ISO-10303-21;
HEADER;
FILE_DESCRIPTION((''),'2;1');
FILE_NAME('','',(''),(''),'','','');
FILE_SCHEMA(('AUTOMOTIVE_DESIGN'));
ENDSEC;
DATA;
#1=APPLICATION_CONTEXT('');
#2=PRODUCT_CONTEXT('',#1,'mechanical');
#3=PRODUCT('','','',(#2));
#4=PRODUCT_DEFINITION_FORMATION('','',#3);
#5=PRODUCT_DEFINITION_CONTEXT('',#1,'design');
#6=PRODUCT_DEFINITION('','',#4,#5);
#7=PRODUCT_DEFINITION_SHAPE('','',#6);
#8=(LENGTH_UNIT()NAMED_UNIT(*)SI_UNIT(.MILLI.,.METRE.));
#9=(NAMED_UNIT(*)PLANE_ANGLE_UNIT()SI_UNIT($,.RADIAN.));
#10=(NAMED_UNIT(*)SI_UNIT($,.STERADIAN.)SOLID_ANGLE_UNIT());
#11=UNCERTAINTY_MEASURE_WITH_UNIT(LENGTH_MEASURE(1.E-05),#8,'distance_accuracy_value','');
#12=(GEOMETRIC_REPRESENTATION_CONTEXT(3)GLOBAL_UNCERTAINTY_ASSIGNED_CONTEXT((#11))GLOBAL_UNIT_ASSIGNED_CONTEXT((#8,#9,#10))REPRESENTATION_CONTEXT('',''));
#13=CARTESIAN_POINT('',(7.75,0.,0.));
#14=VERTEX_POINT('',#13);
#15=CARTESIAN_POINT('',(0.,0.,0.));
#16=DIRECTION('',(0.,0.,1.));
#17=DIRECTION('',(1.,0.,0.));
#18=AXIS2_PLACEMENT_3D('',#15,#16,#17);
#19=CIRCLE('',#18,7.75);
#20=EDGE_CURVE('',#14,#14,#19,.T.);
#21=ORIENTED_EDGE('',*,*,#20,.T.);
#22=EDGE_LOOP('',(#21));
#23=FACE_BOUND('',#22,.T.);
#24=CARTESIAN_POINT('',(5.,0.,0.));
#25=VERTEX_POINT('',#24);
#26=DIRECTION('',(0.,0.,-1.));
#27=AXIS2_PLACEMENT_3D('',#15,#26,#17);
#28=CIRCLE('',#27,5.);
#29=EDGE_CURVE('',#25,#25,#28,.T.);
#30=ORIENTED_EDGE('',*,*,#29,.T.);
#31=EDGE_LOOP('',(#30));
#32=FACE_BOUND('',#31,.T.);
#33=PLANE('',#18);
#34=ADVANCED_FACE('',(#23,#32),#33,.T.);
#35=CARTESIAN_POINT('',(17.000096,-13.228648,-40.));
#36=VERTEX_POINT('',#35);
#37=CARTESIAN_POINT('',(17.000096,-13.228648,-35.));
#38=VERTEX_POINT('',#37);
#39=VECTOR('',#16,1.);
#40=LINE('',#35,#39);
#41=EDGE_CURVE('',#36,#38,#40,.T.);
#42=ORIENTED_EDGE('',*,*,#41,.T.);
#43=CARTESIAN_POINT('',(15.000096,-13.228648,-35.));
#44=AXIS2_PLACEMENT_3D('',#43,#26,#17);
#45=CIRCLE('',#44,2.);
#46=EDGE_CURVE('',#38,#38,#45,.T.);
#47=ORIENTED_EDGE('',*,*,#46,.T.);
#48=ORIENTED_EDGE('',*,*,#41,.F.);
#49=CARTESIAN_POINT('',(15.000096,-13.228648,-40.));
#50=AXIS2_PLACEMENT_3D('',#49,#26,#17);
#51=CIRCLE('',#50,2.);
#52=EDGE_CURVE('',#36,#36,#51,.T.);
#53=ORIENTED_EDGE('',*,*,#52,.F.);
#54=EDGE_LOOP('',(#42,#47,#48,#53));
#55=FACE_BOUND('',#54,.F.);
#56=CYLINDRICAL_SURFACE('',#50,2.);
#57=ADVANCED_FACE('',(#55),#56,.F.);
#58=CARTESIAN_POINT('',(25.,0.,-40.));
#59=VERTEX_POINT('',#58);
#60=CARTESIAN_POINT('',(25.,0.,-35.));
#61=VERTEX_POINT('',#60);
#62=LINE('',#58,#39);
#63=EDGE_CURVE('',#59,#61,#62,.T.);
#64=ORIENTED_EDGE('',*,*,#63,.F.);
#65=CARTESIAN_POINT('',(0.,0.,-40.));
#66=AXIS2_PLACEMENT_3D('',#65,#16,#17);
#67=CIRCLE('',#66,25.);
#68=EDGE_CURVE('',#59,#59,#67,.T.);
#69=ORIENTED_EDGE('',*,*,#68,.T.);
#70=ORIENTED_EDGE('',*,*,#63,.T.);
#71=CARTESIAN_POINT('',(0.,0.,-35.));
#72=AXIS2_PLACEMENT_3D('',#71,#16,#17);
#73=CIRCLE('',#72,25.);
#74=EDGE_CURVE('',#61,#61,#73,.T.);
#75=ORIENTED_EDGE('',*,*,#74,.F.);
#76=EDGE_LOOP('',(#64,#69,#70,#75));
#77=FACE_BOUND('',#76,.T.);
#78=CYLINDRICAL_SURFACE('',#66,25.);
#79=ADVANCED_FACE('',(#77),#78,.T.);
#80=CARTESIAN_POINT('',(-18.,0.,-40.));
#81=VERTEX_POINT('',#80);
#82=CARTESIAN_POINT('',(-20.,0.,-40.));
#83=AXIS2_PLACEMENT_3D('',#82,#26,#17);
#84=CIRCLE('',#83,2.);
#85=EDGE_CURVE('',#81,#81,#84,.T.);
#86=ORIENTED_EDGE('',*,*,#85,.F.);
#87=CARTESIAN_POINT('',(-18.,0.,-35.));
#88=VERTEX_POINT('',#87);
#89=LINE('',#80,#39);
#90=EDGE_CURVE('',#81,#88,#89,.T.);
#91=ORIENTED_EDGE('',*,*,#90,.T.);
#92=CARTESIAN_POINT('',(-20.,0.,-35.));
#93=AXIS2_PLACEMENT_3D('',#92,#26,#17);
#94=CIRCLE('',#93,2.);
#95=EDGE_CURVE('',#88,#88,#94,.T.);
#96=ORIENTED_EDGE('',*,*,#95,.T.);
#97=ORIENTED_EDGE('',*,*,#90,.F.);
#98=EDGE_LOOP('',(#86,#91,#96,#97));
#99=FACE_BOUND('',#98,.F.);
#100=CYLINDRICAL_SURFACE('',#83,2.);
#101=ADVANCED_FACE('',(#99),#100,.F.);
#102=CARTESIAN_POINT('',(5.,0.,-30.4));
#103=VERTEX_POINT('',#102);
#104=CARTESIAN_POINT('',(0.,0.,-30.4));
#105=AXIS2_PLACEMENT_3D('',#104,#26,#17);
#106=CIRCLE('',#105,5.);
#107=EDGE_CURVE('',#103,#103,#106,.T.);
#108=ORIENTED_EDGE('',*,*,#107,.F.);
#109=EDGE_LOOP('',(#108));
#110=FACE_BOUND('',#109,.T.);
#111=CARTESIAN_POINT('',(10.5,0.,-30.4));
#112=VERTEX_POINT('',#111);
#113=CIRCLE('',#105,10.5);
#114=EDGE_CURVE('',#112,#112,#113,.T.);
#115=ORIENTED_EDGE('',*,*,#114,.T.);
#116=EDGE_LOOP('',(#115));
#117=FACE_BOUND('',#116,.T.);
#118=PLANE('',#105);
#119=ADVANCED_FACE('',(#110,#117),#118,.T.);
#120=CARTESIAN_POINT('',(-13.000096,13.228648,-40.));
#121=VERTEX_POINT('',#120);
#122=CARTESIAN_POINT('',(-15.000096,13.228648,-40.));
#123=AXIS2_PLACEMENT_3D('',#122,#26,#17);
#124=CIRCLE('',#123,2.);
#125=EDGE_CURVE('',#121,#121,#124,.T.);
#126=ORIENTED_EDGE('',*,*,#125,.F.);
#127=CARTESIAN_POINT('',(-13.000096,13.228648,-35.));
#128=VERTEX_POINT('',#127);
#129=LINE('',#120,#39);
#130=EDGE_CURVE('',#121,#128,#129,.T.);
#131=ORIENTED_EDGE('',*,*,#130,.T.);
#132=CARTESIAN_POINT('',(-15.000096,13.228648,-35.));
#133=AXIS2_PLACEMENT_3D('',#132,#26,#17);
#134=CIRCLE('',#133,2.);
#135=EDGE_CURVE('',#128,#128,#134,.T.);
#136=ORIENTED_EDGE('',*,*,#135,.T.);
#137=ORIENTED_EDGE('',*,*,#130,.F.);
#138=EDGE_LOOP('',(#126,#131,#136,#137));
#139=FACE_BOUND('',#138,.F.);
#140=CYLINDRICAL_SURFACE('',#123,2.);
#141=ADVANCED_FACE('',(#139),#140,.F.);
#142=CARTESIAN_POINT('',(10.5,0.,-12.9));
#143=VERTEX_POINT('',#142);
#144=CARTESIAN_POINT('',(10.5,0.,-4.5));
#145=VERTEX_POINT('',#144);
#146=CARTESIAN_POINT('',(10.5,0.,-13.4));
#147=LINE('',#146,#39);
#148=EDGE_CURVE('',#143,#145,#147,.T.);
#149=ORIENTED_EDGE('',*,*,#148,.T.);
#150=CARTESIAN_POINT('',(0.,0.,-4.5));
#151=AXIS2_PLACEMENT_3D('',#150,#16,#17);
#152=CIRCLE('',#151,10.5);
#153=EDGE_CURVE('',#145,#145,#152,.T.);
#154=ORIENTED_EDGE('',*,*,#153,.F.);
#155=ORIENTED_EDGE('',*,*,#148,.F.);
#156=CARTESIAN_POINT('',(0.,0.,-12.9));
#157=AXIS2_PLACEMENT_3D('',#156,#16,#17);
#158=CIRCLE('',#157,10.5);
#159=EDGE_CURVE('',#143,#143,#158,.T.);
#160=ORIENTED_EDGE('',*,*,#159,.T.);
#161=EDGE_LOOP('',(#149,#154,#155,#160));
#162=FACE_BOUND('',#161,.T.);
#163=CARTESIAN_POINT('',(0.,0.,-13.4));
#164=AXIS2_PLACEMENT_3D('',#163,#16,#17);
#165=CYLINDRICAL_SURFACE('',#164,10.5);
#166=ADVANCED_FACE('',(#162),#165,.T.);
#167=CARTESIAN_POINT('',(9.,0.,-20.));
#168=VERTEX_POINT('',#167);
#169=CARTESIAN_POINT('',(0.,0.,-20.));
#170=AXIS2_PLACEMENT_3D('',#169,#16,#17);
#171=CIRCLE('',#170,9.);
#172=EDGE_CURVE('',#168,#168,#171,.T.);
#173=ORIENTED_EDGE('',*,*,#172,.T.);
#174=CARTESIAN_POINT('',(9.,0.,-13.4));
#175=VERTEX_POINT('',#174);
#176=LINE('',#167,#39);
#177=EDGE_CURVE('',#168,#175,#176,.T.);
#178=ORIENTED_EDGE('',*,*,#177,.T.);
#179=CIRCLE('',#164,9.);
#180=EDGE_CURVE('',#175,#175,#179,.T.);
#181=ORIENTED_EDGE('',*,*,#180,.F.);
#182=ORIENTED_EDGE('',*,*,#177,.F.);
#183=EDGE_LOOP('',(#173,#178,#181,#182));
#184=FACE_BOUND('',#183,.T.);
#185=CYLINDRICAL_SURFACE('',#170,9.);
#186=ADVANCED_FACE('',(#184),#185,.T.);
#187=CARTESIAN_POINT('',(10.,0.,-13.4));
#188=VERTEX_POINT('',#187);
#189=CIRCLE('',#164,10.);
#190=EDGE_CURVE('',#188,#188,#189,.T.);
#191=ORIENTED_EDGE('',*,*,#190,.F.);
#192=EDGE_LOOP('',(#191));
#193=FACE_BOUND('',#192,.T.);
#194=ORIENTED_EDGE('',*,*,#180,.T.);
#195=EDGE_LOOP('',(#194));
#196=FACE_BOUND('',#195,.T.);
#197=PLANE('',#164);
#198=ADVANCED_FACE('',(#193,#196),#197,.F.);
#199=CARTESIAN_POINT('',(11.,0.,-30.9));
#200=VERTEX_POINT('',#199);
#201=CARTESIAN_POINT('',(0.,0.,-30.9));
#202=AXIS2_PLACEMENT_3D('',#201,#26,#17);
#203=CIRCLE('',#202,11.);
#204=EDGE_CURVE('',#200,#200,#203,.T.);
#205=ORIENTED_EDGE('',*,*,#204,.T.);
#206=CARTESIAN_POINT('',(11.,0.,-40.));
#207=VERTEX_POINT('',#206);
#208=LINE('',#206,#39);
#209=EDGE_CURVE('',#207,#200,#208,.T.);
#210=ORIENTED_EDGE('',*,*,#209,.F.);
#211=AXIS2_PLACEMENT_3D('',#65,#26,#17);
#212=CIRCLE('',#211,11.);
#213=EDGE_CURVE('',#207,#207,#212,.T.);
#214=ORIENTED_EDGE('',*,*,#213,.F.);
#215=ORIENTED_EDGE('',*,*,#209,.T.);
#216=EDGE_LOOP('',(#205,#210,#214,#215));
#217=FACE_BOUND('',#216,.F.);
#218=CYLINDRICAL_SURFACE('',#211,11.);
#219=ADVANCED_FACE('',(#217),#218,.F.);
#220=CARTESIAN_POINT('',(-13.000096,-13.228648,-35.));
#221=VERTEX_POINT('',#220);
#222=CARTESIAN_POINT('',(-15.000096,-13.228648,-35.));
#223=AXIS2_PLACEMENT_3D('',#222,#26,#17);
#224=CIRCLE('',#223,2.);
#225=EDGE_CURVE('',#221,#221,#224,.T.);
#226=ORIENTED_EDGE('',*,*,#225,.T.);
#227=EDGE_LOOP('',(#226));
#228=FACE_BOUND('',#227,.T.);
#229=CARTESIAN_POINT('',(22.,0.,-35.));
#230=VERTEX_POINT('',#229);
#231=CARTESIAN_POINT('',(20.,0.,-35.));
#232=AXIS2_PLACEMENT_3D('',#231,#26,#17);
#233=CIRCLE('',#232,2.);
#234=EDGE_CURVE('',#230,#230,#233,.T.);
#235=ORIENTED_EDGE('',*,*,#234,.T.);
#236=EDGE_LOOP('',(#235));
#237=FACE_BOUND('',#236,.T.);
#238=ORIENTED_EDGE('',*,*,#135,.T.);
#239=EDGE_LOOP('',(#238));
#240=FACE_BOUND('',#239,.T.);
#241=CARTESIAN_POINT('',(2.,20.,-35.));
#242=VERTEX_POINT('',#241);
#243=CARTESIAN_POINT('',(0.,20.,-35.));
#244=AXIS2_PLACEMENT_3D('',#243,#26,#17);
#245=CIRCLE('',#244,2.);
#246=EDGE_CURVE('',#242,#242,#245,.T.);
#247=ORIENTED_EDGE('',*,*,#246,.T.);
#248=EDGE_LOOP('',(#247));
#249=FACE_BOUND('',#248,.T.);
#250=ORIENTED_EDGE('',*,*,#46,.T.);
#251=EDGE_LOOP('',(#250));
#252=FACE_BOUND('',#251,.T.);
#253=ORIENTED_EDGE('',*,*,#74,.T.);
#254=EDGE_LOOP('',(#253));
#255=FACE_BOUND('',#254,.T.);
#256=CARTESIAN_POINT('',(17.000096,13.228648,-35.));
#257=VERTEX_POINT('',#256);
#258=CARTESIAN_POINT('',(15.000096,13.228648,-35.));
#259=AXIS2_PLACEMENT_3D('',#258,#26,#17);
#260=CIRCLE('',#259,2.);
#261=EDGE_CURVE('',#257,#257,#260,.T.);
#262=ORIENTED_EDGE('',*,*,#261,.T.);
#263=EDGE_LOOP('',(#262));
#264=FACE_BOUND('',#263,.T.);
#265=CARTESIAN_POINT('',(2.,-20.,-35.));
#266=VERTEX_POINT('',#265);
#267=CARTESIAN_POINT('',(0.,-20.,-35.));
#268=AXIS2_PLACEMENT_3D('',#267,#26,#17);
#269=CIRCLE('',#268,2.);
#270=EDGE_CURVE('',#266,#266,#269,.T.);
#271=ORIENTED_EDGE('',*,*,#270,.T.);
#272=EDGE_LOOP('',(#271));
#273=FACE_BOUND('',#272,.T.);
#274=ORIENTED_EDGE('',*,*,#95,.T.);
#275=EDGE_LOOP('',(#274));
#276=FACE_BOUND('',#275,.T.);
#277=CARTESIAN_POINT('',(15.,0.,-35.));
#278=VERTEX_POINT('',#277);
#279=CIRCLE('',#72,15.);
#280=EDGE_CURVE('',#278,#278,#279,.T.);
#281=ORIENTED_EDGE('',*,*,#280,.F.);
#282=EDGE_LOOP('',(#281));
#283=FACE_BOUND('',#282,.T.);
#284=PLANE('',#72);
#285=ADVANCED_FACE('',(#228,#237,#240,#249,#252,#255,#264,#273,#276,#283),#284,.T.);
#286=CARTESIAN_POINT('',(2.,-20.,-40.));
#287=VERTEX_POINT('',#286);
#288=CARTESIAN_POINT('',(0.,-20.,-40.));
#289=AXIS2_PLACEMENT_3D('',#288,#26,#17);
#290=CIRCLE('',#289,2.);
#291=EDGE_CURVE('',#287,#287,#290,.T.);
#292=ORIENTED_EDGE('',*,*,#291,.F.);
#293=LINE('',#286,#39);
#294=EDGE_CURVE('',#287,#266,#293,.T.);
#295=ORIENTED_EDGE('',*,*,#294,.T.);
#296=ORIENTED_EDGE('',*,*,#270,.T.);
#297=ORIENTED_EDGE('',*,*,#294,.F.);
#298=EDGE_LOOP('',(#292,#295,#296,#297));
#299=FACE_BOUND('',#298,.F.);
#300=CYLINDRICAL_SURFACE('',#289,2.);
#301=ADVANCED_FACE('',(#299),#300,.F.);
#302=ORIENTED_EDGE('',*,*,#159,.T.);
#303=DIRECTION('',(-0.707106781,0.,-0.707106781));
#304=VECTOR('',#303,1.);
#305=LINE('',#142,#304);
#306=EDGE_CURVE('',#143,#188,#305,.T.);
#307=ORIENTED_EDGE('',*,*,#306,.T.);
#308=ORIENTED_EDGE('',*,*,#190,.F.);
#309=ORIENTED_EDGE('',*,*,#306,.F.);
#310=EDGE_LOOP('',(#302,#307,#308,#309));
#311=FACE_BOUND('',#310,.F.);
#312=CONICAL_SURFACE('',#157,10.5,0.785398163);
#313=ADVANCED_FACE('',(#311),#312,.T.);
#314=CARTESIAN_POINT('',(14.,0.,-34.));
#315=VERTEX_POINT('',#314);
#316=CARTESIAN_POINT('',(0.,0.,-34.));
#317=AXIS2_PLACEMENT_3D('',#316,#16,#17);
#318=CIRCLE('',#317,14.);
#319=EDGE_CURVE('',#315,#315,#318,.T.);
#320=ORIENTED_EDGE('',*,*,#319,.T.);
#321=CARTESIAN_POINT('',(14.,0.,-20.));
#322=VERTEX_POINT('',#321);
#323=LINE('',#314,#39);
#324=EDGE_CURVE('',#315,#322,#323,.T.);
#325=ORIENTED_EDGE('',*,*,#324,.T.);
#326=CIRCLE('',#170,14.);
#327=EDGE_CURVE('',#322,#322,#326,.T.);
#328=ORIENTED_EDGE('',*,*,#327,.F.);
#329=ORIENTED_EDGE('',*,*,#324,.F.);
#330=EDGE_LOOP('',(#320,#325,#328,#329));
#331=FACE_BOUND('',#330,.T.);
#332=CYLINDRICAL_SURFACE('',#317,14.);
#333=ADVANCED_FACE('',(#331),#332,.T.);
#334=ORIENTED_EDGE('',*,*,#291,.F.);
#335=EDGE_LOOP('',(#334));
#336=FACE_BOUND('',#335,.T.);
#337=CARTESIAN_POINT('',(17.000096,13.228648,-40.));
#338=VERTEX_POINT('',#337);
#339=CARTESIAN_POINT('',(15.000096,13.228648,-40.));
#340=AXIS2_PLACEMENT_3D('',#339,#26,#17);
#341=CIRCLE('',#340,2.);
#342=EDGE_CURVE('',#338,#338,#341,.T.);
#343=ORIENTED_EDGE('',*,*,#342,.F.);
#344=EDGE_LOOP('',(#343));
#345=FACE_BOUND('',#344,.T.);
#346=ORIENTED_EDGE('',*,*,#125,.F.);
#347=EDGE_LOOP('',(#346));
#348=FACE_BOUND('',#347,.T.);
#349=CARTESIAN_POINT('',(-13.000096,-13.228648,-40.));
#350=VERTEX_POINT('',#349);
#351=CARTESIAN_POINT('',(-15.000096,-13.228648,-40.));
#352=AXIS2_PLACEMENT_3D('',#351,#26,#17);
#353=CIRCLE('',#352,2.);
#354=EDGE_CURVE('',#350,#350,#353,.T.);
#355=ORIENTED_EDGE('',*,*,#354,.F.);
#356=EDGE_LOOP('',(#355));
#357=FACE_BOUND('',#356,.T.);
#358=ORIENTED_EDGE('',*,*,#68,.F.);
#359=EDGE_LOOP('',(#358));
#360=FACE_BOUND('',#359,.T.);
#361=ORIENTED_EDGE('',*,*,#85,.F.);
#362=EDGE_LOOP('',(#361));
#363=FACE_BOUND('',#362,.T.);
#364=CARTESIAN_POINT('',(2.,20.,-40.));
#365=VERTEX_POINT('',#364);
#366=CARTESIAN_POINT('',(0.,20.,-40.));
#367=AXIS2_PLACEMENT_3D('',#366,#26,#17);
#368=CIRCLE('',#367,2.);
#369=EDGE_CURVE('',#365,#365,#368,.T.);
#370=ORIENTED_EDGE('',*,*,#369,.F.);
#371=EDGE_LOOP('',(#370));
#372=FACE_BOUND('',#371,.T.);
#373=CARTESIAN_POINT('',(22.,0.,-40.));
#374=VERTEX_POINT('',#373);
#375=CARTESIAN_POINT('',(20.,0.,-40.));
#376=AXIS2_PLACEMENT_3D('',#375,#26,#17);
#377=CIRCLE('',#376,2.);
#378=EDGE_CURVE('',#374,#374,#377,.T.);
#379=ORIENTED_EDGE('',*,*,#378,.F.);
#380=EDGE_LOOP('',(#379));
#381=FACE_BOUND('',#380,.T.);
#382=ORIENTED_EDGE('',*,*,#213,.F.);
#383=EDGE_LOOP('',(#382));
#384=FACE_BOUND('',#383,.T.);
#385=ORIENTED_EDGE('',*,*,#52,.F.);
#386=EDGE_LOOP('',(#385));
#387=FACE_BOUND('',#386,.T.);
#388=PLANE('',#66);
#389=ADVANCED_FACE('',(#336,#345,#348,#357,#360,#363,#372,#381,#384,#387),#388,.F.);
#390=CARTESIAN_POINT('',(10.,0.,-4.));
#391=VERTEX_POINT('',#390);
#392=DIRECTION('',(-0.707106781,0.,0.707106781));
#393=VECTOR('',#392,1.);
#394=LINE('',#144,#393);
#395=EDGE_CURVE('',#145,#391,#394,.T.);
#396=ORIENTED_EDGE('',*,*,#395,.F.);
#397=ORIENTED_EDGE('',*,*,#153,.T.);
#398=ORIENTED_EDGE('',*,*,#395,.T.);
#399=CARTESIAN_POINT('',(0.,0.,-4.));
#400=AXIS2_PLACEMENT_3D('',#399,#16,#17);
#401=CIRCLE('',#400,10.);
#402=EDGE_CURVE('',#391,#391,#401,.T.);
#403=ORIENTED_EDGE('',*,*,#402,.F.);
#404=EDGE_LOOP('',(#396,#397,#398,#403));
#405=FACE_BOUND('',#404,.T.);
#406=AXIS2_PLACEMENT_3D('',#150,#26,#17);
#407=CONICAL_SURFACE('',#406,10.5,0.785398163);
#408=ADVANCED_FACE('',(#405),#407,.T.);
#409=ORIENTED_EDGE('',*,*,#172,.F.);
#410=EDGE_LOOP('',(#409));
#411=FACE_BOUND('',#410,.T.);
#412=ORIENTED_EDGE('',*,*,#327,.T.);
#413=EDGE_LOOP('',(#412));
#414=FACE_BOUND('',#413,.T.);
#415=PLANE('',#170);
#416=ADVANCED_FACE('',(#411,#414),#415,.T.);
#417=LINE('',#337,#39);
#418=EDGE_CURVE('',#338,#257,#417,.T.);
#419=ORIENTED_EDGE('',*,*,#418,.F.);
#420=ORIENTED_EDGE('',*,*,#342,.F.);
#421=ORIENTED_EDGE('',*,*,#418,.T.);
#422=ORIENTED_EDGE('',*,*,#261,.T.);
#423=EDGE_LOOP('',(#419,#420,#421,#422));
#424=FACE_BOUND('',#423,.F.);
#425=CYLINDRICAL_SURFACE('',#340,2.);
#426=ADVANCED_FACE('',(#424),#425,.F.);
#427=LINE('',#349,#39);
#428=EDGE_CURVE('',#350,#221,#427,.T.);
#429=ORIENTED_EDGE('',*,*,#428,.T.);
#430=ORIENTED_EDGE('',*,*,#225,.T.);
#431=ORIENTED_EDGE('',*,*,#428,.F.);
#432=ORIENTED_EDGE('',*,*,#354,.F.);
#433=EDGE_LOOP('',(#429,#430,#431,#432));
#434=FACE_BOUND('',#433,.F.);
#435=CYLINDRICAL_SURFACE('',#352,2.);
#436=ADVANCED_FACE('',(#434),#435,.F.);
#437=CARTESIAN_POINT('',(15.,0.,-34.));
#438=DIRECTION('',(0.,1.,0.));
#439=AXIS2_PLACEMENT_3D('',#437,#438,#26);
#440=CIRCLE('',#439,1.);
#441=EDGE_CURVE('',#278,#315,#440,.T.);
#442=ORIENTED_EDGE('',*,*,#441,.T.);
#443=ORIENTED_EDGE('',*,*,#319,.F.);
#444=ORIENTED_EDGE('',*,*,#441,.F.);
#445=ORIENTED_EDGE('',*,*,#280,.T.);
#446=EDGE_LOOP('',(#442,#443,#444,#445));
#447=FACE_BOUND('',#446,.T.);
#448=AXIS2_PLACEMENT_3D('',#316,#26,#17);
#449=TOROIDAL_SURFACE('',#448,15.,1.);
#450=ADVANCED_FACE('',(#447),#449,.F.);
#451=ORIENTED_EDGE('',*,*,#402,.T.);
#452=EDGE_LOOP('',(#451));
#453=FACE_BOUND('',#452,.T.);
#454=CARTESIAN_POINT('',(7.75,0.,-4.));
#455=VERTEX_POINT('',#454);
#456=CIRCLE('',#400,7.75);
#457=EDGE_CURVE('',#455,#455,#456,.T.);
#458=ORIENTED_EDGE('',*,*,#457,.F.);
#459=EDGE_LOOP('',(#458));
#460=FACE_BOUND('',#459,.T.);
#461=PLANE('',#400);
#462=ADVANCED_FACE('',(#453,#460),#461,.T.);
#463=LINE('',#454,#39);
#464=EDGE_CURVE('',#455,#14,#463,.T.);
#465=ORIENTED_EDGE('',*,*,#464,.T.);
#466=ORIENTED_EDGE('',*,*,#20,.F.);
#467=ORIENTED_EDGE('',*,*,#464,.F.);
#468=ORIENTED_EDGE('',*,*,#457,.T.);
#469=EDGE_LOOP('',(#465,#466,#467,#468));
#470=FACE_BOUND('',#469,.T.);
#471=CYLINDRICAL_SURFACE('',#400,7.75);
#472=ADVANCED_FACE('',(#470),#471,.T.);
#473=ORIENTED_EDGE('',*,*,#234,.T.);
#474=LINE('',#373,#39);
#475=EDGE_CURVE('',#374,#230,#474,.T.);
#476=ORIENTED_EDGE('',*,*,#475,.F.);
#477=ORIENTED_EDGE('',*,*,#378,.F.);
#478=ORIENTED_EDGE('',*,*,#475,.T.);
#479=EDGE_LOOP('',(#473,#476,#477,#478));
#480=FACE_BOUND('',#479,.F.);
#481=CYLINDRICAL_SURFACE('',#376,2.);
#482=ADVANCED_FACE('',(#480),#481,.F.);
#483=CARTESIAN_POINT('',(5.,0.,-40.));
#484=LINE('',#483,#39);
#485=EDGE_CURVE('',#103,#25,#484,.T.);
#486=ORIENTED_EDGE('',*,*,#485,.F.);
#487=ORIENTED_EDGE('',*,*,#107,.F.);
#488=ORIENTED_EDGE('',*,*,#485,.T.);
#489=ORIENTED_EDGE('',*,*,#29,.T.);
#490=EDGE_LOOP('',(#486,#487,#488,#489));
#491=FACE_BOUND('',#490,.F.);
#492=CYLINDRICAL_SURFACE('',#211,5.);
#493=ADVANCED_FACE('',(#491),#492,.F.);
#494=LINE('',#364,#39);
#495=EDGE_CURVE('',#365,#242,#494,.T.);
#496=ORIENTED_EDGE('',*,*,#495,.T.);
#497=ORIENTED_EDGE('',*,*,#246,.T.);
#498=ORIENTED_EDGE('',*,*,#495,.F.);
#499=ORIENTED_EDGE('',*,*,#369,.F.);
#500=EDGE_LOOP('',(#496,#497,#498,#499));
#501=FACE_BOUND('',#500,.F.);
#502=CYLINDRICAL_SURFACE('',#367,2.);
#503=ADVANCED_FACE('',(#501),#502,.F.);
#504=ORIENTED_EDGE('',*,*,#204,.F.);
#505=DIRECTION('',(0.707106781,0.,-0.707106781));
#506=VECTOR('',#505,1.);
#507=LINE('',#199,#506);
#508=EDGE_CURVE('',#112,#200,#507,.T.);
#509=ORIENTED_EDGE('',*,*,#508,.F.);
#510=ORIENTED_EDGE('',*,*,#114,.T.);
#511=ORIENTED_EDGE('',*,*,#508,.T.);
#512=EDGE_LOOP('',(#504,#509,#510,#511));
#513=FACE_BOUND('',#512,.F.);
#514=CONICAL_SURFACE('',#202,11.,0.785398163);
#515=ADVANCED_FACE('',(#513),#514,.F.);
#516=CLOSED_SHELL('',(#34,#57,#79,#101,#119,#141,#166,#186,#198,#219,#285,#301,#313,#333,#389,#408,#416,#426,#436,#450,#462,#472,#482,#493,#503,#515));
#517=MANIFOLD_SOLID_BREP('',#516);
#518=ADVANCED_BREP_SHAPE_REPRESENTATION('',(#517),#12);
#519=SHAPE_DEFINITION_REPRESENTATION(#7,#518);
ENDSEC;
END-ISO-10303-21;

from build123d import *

# Parameters (mm, degrees)
F2_R     = 5
F3_DEPTH = 40
F2_R_2   = 11
F4_DEPTH = 9.6
F2_R_3   = 2
F5_DEPTH = 5
F6_SIZE  = 0.5
F7_SIZE2 = 0.5
F7_SIZE  = 0.5
F8_SIZE2 = 0.5
F8_SIZE  = 0.5


# Not quite as in the source:
# - a feature names something its author has since deleted; it is built from what else it names


with BuildPart() as f1:
    # F0 (on Front) → F1 (revolve)
    with BuildSketch(Plane.XZ):
        with BuildLine():
            Line((7.75, 0), (0, 0))
            Line((0, 0), (0, -40))
            Line((0, -40), (25, -40))
            Line((25, -40), (25, -35))
            Line((25, -35), (15, -35))
            ThreePointArc((15, -35), (14.2928932188, -34.7071067812), (14, -34))
            Line((14, -34), (14, -20))
            Line((14, -20), (9, -20))
            Line((9, -20), (9, -13.4))
            Line((9, -13.4), (10.5, -13.4))
            Line((10.5, -13.4), (10.5, -4))
            Line((10.5, -4), (7.75, -4))
            Line((7.75, -4), (7.75, 0))
        make_face()
    revolve(axis=Axis((0, 0, -20), (0, 0, 1)))

    # F2 (on face) → F3 (cut)
    with BuildSketch(Plane(origin=(0, 0, -40), x_dir=(1, 0, 0), z_dir=(0, 0, -1))):
        Circle(F2_R)
    extrude(amount=-F3_DEPTH, mode=Mode.SUBTRACT)

    # F2 (on face) → F4 (cut)
    with BuildSketch(Plane(origin=(0, 0, -40), x_dir=(1, 0, 0), z_dir=(0, 0, -1))):
        Circle(F2_R_2)
        Circle(F2_R, mode=Mode.SUBTRACT)
    extrude(amount=-F4_DEPTH, mode=Mode.SUBTRACT)

    # F2 (on face) → F5 (cut)
    with BuildSketch(Plane(origin=(0, 0, -40), x_dir=(1, 0, 0), z_dir=(0, 0, -1))):
        with Locations((15.0000959, 13.2286478141)):
            Circle(F2_R_3)
        with Locations((-15.0000959, 13.2286478141)):
            Circle(F2_R_3)
        with Locations((-15.0000959, -13.2286478141)):
            Circle(F2_R_3)
        with Locations((15.0000959, -13.2286478141)):
            Circle(F2_R_3)
        with Locations((0, -20)):
            Circle(F2_R_3)
        with Locations((20, 0)):
            Circle(F2_R_3)
        with Locations((-20, 0)):
            Circle(F2_R_3)
        with Locations((0, 20)):
            Circle(F2_R_3)
    extrude(amount=-F5_DEPTH, mode=Mode.SUBTRACT)

    # F6
    f6_edges = [f1.edges().sort_by_distance(p)[0] for p in [
        (-11, 0, -30.4),
    ]]
    chamfer(f6_edges, length=F6_SIZE)

    # F7
    f7_edges = [f1.edges().sort_by_distance(p)[0] for p in [
        (-10.5, 0, -13.4),
    ]]
    chamfer(f7_edges, length=F7_SIZE, length2=F7_SIZE2)

    # F8
    f8_edges = [f1.edges().sort_by_distance(p)[0] for p in [
        (-10.5, 0, -4),
    ]]
    chamfer(f8_edges, length=F8_SIZE, length2=F8_SIZE2)


solid = f1.part
